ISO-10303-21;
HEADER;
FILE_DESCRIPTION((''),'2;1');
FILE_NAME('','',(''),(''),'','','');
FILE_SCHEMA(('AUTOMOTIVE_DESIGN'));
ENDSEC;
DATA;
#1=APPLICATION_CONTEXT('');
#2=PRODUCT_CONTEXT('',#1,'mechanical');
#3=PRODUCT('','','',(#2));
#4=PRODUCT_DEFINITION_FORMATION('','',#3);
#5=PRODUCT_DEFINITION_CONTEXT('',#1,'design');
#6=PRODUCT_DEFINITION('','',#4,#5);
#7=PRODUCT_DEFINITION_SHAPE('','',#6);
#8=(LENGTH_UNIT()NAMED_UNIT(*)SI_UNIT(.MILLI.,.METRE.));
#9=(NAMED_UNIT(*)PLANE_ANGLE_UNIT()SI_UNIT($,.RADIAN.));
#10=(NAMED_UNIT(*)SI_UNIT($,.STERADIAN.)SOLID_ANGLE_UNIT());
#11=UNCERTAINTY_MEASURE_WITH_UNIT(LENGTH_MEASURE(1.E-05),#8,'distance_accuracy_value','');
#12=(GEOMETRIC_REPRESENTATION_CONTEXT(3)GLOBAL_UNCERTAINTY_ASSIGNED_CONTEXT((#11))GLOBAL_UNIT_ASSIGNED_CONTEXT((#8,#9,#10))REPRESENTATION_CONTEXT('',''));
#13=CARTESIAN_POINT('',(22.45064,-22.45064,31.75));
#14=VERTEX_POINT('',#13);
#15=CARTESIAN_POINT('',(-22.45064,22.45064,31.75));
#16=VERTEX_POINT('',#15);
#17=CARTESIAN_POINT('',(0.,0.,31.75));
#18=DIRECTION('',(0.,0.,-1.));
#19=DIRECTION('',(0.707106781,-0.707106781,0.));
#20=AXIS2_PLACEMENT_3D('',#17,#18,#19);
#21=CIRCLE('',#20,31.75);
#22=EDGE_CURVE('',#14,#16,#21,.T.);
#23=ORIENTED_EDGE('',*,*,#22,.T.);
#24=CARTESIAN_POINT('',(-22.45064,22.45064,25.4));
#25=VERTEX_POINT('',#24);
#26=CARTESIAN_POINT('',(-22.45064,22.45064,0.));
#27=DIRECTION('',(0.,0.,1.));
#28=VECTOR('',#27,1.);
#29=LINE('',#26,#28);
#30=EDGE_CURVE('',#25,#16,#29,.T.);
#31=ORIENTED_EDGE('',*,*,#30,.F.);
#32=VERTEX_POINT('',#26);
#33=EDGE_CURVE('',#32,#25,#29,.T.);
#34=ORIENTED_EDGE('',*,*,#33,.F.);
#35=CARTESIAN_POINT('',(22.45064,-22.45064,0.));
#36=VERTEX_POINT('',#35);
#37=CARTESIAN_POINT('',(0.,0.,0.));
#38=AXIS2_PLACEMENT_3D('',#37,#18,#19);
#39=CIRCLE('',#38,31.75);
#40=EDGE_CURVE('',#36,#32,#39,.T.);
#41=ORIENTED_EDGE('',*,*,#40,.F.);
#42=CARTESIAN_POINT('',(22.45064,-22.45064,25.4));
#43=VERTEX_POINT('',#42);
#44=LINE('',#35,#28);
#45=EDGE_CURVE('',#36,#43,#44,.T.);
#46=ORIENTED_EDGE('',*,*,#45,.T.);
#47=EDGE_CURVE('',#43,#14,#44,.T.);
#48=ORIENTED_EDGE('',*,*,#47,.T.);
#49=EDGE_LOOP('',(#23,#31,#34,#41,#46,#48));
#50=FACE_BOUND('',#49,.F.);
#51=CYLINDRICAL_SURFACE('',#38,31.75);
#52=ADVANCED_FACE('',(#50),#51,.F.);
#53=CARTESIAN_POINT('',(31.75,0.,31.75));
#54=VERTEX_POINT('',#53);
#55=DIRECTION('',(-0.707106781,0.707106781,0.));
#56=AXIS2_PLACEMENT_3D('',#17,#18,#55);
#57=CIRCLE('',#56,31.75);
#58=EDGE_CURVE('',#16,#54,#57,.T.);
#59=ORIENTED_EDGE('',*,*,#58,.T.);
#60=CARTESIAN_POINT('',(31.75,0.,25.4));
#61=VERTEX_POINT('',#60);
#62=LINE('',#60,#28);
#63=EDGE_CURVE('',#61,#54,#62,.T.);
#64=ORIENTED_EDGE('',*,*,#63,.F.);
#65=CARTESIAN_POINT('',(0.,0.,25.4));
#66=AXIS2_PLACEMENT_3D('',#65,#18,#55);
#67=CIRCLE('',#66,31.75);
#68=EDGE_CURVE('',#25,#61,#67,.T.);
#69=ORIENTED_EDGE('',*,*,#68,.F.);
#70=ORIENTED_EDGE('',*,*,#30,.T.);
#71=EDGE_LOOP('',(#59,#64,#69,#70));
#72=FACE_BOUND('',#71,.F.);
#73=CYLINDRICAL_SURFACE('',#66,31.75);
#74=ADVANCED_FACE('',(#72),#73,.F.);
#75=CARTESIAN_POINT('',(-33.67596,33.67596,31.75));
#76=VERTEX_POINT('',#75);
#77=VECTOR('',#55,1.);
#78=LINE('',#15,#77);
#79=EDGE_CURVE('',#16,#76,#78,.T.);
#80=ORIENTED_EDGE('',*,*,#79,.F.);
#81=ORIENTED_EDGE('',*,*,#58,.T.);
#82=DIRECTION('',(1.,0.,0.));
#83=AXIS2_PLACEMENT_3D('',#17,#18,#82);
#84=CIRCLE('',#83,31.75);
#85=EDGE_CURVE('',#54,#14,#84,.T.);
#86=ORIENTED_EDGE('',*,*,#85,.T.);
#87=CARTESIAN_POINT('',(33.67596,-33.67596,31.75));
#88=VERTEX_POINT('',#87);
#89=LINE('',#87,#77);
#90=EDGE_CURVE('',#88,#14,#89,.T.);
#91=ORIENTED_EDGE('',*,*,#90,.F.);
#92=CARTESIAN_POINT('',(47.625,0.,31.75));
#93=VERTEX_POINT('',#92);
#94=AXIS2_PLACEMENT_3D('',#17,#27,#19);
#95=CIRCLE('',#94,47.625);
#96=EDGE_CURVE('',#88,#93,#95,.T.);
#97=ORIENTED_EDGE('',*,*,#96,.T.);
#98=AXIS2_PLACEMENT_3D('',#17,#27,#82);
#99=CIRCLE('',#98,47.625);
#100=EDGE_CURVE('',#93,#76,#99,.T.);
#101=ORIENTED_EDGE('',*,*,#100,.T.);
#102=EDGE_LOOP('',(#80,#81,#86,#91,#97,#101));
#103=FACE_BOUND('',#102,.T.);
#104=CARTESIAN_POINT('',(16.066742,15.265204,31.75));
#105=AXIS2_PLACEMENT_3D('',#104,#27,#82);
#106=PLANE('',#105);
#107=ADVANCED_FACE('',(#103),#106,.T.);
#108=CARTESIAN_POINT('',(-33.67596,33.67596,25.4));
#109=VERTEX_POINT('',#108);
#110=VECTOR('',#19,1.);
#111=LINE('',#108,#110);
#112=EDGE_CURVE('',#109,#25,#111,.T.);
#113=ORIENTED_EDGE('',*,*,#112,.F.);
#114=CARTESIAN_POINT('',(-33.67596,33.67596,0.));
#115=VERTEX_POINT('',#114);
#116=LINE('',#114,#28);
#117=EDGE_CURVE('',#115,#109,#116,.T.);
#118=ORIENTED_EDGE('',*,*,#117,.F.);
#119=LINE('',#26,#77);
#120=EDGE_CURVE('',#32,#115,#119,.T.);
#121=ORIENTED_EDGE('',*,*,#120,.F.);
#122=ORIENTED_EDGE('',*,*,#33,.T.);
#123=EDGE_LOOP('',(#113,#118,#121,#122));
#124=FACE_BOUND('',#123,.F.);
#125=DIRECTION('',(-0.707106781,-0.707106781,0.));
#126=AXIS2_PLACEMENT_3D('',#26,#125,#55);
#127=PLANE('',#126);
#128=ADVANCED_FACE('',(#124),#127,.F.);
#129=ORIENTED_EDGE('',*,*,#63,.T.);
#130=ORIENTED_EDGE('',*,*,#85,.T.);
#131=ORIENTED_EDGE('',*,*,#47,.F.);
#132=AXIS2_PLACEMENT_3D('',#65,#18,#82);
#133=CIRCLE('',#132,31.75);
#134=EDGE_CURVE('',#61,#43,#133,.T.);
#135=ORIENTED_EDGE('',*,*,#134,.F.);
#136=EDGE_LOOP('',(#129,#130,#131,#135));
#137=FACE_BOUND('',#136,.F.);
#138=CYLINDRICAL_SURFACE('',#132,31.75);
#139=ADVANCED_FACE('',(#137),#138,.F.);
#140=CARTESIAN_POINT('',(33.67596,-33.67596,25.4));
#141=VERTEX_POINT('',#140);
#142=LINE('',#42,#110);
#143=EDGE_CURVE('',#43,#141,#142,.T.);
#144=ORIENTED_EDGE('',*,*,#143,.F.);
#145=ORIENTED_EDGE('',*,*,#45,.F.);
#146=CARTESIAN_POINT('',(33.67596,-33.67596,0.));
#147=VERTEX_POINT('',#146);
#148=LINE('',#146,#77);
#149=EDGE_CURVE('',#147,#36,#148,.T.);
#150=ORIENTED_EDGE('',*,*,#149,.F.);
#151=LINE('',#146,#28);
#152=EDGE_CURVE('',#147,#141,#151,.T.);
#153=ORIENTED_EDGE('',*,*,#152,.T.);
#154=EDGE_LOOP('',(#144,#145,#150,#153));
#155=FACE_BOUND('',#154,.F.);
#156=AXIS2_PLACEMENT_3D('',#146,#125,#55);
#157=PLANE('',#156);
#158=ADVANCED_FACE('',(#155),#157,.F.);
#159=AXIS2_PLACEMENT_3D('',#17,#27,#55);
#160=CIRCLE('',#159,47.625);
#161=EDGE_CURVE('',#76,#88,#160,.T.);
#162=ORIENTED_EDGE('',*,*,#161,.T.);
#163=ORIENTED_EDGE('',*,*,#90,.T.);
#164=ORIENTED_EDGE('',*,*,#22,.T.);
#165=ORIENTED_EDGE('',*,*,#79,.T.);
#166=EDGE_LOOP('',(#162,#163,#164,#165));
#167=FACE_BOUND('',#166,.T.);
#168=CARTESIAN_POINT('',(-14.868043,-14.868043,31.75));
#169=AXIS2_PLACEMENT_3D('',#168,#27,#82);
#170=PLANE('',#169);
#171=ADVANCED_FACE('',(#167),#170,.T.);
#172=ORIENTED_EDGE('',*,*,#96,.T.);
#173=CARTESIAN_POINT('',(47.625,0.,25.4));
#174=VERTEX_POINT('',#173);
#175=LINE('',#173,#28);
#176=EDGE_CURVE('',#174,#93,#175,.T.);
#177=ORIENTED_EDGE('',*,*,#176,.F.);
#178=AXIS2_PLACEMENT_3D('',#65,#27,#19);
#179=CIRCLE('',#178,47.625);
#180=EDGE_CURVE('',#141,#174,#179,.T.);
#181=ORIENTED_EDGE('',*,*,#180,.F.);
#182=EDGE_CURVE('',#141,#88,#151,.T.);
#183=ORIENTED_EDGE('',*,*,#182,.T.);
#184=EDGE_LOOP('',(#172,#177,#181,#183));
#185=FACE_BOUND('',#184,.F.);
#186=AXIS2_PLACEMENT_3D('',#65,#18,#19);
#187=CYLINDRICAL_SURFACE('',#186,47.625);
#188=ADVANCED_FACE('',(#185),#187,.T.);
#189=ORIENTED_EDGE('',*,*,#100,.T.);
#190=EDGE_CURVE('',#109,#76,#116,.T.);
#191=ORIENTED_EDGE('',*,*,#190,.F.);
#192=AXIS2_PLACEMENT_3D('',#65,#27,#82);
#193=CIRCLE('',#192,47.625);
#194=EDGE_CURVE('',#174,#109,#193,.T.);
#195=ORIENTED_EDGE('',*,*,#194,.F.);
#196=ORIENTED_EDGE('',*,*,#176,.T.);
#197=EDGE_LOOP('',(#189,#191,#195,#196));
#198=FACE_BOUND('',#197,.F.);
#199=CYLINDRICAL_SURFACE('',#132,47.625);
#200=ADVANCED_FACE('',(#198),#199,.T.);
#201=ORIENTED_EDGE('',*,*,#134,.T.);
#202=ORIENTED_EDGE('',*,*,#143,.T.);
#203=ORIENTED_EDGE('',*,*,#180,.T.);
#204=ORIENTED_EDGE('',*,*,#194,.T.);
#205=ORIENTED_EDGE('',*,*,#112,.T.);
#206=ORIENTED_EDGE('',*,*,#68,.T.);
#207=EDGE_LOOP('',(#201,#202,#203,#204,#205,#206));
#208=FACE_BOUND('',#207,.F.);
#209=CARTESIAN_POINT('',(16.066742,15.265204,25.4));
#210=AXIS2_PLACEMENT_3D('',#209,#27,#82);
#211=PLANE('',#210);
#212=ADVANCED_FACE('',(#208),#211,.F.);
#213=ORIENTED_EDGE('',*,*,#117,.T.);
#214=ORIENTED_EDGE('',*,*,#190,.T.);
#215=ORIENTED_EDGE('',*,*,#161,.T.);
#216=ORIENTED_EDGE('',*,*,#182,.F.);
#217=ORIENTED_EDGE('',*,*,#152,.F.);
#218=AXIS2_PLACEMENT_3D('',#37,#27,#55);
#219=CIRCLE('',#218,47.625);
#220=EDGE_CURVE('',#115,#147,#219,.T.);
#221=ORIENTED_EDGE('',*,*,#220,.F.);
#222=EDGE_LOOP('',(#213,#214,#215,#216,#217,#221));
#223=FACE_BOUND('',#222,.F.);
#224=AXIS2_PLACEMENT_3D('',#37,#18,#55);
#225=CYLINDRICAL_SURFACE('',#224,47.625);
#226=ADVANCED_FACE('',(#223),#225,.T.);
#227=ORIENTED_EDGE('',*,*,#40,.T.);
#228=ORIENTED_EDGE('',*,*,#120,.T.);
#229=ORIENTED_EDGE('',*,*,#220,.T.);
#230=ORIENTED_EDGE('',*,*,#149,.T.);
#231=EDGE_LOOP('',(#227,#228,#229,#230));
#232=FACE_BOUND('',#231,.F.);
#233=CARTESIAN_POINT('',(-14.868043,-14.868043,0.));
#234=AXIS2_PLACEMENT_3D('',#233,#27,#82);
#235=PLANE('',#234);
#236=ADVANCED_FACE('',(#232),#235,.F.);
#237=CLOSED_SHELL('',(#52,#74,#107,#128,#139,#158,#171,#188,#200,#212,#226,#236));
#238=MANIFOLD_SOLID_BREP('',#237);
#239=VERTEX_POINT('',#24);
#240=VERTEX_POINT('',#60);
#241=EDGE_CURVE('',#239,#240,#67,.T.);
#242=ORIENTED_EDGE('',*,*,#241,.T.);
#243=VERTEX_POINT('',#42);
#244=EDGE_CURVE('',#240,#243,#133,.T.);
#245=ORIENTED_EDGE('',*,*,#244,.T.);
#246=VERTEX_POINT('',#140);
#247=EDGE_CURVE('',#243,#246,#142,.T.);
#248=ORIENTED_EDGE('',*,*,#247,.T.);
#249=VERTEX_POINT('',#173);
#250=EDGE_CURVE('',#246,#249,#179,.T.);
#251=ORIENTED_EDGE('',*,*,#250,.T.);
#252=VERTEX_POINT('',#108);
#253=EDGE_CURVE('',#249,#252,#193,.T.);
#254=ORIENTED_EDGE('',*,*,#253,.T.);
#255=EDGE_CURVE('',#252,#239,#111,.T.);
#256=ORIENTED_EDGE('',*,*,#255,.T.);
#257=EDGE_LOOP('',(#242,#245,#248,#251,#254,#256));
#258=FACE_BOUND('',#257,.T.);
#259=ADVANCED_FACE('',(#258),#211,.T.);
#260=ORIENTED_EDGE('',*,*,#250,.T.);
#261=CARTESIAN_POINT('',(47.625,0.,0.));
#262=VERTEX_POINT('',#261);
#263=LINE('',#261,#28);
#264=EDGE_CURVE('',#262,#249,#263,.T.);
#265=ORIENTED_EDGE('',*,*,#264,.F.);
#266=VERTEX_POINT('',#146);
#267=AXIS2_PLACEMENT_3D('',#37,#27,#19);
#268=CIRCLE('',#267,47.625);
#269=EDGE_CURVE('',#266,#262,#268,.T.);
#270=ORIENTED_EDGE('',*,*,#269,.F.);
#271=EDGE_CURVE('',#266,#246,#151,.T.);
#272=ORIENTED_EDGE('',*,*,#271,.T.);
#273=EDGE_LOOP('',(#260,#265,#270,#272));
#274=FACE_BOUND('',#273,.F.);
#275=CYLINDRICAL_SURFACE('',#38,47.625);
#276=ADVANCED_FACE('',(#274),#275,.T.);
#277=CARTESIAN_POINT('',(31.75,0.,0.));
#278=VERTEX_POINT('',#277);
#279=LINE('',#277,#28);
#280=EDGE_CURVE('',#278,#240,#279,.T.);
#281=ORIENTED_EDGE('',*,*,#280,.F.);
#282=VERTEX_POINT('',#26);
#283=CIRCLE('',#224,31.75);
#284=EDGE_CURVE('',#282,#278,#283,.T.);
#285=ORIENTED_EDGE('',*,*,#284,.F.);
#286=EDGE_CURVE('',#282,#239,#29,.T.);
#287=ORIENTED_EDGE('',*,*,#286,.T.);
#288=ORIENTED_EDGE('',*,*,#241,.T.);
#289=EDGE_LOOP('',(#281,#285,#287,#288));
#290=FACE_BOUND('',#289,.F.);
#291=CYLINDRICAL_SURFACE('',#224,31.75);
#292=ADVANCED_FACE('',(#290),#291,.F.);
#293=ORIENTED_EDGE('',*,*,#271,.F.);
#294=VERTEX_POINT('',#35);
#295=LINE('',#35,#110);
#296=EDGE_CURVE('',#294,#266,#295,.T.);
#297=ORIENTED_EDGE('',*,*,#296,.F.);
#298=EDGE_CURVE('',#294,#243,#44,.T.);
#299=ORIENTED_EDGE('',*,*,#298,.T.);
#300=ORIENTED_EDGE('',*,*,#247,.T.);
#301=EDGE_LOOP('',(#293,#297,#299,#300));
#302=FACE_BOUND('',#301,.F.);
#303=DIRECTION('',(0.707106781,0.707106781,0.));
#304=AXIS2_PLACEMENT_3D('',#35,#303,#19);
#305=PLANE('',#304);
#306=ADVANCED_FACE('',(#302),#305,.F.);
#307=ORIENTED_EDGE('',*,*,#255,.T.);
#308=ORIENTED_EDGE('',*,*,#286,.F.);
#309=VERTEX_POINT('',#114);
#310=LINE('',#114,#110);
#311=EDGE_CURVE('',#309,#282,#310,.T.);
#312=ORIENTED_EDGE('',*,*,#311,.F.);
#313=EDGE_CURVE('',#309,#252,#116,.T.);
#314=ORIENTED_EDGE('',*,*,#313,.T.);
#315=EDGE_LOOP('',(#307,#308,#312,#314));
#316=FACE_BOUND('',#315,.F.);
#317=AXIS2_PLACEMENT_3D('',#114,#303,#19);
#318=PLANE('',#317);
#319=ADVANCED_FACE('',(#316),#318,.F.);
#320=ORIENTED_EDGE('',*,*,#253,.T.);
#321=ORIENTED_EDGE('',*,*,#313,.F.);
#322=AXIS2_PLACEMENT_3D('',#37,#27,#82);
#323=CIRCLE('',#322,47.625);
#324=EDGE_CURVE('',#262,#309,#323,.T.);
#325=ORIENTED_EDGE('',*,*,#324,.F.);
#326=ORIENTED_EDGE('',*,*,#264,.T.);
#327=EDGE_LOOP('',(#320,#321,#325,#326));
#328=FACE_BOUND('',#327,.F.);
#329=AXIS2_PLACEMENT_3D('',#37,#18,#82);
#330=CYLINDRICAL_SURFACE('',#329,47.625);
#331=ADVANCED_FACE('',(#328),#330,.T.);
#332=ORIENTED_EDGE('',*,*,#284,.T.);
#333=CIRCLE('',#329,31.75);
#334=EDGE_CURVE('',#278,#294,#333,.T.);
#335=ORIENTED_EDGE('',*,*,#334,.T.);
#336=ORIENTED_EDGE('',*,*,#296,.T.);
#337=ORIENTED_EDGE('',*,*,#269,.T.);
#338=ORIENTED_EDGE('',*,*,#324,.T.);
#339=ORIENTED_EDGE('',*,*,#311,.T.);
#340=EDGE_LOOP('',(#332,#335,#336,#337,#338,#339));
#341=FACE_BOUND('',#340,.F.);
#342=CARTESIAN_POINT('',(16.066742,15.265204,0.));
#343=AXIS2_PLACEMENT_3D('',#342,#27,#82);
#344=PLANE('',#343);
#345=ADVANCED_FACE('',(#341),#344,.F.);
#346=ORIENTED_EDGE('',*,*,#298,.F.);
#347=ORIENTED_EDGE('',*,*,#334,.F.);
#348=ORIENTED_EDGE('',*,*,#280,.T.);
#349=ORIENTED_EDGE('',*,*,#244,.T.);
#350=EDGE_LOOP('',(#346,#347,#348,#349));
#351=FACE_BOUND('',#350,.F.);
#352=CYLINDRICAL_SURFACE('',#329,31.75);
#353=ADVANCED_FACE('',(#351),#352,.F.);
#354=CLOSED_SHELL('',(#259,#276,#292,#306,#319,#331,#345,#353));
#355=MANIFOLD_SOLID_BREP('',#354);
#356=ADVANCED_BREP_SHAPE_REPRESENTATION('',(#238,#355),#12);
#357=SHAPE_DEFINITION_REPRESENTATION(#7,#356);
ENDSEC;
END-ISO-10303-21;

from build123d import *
from build123d import SkipClean  # not in build123d's __all__

# Parameters (mm, degrees)
F1_DEPTH = 25.4
F2_DEPTH = 31.75
F3_DEPTH = 6.35


with BuildPart() as f1:
    # F0 (on Top) → F1 (new body)
    with BuildSketch(Plane.XY):
        with BuildLine():
            ThreePointArc((33.675960454, -33.675960454), (43.9997627359, -18.2252984664), (47.625, 0))
            ThreePointArc((47.625, 0), (18.2252984664, 43.9997627359), (-33.675960454, 33.675960454))
            Line((-33.675960454, 33.675960454), (-22.4506403027, 22.4506403027))
            ThreePointArc((-22.4506403027, 22.4506403027), (12.1501989776, 29.3331751572), (31.75, 0))
            ThreePointArc((31.75, 0), (29.3331751572, -12.1501989776), (22.4506403027, -22.4506403027))
            Line((22.4506403027, -22.4506403027), (33.675960454, -33.675960454))
        make_face()
    extrude(amount=F1_DEPTH)


with BuildPart() as f2:
    # F0 (on Top) → F2 (new body)
    with BuildSketch(Plane.XY):
        with BuildLine():
            Line((-22.4506403027, 22.4506403027), (-33.675960454, 33.675960454))
            ThreePointArc((-33.675960454, 33.675960454), (-33.675960454, -33.675960454), (33.675960454, -33.675960454))
            Line((33.675960454, -33.675960454), (22.4506403027, -22.4506403027))
            ThreePointArc((22.4506403027, -22.4506403027), (-22.4506403027, -22.4506403027), (-22.4506403027, 22.4506403027))
        make_face()
    extrude(amount=F2_DEPTH)

    # F3 (add): a face of the model
    f3_faces = [f1.part.faces().sort_by_distance(p)[0] for p in [
        (32.8629508495, 32.8629508495, 25.4),
    ]]
    with SkipClean():  # cleaning this boolean's faces spoils the solid; the shape is the same uncleaned
        extrude(f3_faces, amount=F3_DEPTH)


solid = Compound([f1.part, f2.part])
